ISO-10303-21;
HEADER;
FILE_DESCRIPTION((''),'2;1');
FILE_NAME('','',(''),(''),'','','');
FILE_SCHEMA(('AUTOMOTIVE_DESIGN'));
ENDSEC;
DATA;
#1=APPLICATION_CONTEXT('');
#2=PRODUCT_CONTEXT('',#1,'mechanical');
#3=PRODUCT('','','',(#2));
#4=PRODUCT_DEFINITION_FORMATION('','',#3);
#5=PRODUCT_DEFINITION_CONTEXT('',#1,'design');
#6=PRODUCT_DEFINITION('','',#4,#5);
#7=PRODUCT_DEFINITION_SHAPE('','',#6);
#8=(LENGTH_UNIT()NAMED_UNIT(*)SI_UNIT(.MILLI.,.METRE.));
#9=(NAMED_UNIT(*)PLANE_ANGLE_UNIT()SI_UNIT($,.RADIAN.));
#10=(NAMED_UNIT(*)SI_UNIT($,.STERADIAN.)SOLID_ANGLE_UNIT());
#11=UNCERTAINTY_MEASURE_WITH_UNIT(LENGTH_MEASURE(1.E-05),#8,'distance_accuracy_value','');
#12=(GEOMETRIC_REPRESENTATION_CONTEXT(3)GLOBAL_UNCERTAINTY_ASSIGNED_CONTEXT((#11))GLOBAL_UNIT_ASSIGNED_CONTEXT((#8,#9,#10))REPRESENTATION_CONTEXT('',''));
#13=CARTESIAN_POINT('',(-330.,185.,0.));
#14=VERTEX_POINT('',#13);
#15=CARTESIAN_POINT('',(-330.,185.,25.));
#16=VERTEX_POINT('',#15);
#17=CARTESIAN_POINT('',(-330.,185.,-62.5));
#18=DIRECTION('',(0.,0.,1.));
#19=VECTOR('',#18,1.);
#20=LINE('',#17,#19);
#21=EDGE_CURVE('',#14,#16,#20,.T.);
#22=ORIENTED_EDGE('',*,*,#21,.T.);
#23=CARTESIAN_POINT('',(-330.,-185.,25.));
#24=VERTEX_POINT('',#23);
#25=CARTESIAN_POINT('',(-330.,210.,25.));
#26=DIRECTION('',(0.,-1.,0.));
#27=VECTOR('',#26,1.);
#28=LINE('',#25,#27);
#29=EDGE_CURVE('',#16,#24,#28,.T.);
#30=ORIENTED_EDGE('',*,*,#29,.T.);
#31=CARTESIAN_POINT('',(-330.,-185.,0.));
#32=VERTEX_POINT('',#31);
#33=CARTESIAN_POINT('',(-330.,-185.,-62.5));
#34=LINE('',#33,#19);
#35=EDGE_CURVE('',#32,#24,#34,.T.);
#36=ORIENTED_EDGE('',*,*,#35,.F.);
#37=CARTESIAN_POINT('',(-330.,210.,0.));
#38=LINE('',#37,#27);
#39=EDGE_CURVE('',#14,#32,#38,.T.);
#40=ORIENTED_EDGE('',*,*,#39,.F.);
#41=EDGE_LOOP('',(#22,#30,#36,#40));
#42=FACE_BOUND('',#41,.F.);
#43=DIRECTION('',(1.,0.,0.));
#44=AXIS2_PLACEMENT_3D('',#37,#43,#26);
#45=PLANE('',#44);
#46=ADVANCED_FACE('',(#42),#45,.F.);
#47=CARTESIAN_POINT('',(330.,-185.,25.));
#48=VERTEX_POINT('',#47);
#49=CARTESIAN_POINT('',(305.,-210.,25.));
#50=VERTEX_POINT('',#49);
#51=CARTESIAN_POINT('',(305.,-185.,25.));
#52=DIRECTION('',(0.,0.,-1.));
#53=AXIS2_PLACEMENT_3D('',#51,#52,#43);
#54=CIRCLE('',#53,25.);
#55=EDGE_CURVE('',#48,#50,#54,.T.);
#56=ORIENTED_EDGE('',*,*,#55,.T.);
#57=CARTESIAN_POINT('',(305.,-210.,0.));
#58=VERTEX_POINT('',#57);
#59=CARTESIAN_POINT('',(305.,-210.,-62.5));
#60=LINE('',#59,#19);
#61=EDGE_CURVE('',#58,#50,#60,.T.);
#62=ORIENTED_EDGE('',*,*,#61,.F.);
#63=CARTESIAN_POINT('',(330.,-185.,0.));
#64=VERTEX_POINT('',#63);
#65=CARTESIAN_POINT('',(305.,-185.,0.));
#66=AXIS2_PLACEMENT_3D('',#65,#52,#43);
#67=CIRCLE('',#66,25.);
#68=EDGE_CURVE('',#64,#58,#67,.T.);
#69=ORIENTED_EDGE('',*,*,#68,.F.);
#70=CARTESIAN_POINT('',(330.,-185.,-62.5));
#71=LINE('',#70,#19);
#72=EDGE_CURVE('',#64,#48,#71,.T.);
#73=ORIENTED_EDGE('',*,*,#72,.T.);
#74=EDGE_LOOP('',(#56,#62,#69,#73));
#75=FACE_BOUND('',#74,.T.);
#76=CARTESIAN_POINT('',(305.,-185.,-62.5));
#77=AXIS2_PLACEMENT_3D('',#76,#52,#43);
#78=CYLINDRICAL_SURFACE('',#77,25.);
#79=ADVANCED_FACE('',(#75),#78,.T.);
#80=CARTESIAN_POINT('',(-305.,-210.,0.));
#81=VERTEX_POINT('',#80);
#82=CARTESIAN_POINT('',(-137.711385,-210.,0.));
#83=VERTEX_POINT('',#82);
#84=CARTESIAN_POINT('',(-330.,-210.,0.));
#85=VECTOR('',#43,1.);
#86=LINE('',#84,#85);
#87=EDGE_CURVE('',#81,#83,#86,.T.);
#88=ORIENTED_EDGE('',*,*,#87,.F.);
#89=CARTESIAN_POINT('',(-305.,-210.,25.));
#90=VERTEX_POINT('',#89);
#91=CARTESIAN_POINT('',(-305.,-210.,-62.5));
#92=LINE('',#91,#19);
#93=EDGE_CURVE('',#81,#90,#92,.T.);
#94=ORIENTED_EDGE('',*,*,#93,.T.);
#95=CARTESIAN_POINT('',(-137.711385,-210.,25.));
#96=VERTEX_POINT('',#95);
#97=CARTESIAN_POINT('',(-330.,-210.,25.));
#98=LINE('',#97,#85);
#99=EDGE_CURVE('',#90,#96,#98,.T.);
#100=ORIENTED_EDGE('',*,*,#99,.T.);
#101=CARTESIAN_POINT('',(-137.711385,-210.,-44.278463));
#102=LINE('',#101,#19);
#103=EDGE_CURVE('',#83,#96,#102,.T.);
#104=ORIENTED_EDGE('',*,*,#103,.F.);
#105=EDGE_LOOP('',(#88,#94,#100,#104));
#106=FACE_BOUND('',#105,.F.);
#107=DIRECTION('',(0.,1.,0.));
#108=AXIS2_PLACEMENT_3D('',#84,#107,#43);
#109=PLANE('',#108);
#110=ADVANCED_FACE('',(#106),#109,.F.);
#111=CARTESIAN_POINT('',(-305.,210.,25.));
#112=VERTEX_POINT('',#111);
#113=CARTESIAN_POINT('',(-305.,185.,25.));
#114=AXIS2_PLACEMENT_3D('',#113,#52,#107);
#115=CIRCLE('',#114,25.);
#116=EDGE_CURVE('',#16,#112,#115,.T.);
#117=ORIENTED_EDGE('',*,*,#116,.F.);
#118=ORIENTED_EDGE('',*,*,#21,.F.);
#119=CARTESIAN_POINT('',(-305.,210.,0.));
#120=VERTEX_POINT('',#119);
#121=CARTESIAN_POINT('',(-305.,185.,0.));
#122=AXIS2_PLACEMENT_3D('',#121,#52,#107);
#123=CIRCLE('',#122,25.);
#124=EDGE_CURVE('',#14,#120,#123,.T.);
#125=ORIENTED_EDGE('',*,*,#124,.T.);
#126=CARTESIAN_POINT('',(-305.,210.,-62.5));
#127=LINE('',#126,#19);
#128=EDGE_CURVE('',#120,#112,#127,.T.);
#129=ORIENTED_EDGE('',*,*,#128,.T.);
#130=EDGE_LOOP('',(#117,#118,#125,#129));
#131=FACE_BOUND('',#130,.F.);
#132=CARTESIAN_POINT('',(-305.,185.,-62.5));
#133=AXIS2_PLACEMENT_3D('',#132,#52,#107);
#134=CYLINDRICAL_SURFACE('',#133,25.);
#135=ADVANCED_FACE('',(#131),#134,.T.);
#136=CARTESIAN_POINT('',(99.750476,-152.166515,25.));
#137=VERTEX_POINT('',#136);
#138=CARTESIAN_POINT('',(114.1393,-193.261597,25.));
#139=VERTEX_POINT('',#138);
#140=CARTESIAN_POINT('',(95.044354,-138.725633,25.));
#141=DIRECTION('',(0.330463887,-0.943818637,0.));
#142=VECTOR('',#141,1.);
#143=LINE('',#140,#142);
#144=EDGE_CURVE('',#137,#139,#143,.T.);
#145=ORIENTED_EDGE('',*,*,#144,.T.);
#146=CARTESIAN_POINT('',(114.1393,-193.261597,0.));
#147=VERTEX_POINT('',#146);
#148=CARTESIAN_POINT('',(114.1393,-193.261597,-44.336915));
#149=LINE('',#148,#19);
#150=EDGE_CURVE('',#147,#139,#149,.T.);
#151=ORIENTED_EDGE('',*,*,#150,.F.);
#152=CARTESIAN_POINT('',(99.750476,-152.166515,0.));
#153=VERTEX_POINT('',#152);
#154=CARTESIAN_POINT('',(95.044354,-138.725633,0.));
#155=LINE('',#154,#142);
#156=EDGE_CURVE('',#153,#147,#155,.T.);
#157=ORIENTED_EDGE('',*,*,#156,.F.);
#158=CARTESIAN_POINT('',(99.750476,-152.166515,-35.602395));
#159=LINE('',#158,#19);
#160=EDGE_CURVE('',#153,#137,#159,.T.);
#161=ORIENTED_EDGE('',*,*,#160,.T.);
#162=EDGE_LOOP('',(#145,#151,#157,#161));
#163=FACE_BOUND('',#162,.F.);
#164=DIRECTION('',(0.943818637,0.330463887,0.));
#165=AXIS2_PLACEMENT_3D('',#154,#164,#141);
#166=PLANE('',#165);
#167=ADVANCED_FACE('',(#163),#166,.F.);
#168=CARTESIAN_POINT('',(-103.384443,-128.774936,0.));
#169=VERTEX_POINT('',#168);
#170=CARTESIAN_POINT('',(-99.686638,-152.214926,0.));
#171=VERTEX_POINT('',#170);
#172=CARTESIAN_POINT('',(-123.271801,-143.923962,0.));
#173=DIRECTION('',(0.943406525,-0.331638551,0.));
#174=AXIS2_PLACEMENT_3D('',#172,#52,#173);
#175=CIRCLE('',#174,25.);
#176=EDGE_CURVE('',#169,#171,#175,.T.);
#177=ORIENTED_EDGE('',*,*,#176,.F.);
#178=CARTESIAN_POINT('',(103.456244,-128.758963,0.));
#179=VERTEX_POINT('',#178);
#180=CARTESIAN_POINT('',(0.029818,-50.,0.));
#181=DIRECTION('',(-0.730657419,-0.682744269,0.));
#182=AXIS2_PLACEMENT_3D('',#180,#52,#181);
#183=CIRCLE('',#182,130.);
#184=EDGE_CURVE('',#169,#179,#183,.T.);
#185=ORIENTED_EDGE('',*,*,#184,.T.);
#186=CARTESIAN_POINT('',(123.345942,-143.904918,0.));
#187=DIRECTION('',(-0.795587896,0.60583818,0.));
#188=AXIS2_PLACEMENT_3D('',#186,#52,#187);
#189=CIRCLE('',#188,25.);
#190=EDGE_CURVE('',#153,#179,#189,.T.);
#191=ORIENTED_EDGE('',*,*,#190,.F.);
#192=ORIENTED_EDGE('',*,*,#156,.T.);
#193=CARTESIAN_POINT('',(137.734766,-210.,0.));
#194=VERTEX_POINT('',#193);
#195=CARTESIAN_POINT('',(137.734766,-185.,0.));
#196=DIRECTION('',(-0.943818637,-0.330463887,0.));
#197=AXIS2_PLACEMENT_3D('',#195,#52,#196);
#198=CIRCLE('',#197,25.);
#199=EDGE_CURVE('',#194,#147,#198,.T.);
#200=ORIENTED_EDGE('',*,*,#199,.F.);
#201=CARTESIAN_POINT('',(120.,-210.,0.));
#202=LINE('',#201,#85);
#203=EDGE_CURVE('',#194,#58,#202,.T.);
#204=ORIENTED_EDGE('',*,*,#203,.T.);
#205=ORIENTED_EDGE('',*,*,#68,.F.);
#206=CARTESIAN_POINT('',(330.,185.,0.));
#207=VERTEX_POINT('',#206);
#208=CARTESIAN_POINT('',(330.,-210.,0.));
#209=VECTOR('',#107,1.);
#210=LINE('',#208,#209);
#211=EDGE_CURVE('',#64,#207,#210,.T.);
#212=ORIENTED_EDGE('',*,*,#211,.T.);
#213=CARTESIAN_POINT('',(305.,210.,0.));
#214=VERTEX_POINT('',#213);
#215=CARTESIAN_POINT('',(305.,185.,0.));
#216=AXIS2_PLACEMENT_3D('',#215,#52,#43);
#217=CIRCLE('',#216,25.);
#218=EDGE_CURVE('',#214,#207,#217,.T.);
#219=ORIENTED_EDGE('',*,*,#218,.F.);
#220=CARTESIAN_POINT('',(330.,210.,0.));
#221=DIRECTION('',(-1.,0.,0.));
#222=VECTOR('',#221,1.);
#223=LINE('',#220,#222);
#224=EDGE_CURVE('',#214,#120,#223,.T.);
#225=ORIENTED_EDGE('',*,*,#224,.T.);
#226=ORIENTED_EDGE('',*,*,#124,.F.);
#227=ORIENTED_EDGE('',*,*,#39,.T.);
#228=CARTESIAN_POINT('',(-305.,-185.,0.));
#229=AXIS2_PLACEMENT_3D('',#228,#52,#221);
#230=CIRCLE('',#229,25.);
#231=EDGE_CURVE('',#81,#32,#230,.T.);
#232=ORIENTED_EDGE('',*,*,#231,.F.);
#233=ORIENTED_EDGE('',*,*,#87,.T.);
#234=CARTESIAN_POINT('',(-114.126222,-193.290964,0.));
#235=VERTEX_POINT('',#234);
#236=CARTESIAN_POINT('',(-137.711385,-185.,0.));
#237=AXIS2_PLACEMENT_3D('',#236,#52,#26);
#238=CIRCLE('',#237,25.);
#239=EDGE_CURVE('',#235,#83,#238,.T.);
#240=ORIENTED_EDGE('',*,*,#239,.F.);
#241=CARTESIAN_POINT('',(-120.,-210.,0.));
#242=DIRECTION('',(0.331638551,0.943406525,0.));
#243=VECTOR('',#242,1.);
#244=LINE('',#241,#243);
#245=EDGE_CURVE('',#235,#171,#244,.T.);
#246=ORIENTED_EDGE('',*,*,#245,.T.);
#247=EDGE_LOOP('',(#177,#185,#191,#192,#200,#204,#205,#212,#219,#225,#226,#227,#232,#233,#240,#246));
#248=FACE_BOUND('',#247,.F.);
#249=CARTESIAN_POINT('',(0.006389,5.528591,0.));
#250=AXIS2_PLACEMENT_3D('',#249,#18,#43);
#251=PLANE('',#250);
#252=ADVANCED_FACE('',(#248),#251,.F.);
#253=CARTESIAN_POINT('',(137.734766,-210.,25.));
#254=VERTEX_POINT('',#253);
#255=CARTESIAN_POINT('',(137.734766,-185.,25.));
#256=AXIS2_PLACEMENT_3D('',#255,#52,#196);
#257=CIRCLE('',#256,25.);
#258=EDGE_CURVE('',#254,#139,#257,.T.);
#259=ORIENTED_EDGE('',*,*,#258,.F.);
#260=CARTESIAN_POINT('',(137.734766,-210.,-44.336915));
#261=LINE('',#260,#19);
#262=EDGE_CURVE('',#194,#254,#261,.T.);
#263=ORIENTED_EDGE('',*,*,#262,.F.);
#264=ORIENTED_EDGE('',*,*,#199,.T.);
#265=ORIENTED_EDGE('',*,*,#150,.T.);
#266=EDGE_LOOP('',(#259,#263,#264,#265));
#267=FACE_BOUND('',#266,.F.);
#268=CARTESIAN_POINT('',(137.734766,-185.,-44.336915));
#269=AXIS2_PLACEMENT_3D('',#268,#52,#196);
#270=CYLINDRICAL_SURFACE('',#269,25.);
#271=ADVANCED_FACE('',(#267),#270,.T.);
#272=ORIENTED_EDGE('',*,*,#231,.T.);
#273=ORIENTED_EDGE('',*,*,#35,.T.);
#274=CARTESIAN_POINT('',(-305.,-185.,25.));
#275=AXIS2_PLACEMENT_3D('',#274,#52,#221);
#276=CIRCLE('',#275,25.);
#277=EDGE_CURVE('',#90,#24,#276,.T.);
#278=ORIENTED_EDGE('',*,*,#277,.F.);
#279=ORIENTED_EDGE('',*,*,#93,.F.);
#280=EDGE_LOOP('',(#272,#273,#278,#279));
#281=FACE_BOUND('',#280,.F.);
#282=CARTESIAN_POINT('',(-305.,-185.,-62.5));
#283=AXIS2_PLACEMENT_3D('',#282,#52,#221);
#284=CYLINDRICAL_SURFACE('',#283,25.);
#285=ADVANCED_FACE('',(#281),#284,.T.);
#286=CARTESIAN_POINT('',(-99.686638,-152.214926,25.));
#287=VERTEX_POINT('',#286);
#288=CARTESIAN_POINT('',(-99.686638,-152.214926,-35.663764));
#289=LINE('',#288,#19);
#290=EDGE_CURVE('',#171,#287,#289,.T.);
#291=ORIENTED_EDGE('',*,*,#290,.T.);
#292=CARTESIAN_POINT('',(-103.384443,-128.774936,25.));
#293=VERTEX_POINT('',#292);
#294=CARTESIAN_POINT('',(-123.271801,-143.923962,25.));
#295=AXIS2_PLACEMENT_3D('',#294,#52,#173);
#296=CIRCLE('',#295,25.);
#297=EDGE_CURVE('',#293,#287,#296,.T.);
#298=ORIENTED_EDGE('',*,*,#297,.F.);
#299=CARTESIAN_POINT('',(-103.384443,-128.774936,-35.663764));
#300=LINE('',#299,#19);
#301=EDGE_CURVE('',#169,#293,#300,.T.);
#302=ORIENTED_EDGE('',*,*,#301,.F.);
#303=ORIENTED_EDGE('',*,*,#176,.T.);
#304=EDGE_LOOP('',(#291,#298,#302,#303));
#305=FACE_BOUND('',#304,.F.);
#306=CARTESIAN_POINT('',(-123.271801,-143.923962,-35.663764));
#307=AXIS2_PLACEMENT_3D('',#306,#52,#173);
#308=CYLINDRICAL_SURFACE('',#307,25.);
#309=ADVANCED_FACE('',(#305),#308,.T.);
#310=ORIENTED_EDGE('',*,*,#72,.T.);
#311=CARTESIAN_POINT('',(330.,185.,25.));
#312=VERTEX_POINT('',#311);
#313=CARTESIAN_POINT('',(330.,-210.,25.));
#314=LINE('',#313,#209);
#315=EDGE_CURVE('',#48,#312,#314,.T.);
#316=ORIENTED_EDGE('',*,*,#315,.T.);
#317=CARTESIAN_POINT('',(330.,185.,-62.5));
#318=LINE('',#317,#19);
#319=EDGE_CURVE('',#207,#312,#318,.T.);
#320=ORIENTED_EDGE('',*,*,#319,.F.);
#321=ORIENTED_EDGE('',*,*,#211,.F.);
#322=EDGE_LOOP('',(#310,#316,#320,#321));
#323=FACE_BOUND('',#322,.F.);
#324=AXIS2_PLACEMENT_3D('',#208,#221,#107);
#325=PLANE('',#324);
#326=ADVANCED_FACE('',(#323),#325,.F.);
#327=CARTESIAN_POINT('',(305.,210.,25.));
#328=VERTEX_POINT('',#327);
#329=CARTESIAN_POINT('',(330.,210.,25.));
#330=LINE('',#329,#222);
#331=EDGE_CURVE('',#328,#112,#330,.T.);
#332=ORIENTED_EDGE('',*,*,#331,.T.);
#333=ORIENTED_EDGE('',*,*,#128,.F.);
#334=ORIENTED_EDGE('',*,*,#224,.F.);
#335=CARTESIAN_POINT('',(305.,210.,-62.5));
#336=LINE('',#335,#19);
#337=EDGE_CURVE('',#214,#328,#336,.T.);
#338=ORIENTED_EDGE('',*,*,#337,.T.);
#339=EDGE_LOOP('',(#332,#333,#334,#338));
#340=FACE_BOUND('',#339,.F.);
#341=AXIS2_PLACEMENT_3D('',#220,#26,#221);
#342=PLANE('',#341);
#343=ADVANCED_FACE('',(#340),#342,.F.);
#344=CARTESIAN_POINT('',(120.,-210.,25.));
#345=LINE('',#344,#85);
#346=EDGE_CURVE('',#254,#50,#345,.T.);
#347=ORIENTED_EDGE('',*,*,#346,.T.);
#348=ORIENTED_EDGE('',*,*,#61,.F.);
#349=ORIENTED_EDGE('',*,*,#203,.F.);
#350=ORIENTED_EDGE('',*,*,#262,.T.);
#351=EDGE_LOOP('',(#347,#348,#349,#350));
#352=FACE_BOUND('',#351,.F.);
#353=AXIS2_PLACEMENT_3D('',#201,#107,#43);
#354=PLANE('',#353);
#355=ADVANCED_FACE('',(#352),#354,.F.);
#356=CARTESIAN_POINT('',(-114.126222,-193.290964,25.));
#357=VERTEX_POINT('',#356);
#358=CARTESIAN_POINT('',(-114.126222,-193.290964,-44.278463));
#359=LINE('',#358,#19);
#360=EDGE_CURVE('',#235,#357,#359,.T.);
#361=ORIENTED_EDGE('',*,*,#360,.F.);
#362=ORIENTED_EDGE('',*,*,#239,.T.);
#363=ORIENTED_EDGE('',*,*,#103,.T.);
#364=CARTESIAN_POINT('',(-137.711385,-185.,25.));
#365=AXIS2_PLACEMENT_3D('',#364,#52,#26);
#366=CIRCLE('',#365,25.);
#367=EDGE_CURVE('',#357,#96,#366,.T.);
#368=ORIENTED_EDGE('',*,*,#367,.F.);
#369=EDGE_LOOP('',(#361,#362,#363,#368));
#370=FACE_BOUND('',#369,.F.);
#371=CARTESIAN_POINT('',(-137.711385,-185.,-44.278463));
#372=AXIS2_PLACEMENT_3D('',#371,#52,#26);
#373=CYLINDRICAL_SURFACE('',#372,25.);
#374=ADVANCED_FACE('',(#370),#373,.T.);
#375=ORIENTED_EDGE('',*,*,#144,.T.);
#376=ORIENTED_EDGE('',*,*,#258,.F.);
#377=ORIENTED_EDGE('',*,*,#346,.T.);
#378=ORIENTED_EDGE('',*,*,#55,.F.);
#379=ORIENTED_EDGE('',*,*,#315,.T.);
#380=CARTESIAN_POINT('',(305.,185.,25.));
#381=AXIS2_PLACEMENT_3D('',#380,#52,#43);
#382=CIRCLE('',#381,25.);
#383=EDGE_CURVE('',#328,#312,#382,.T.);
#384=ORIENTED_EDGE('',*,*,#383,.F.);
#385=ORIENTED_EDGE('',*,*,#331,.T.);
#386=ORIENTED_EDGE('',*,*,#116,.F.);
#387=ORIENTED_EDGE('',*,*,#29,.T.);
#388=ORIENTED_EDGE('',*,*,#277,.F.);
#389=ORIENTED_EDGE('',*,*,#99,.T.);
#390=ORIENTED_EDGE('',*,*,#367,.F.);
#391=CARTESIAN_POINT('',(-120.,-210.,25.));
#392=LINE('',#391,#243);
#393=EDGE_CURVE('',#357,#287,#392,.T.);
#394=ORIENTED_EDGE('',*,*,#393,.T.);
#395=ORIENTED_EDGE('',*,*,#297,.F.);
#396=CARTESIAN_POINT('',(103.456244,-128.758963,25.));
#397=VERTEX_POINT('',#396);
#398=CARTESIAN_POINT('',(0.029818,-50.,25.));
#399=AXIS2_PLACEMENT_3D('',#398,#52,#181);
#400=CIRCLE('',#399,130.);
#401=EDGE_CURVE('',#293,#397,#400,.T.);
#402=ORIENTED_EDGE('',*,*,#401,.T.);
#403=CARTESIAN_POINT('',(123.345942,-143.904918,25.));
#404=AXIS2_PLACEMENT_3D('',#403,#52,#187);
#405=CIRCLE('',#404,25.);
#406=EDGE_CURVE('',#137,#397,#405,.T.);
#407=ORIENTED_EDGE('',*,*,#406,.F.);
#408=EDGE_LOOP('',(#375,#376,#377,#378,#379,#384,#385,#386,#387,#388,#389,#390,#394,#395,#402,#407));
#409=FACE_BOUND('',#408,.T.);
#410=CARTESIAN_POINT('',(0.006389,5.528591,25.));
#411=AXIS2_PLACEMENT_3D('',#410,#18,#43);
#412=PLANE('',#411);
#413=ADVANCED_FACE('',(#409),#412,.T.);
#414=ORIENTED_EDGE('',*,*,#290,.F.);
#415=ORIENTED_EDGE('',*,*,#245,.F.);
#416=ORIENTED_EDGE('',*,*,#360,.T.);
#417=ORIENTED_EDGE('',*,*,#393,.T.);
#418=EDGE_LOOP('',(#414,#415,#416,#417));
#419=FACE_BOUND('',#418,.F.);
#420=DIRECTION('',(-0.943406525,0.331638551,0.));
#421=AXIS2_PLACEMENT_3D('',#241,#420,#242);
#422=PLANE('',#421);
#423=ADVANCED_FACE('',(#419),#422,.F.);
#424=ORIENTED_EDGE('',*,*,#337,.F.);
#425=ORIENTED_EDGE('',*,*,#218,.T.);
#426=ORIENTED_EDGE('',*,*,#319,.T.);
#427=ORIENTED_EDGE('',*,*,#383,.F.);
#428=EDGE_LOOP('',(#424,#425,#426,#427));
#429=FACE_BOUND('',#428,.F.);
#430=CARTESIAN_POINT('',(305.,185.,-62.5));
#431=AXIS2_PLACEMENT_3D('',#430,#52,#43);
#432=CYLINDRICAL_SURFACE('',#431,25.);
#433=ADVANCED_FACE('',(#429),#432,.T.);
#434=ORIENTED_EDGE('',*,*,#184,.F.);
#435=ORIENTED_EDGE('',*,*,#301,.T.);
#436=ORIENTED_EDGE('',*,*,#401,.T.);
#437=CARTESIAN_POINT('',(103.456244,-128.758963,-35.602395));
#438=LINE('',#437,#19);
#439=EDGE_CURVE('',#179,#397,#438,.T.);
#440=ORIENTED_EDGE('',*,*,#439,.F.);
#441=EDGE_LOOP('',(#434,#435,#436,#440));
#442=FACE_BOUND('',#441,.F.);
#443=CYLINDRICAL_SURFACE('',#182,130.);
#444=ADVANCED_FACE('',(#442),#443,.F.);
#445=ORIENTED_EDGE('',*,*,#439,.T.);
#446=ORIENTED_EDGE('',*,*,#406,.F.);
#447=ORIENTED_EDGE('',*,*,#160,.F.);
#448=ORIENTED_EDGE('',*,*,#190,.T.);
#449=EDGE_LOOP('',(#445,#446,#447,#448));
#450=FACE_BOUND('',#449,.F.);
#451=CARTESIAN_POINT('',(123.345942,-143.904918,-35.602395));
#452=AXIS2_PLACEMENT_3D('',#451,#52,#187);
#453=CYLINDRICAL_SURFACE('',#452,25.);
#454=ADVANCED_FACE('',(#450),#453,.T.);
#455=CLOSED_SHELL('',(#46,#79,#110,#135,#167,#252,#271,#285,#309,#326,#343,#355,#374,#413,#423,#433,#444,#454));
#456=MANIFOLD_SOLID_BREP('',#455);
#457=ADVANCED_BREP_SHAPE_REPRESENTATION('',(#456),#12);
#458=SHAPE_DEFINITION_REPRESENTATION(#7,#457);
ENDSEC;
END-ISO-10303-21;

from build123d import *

# Parameters (mm, degrees)
F1_DEPTH    = 25
F2_T1_DEPTH = 150
F2_T3_DEPTH = 113.556925296
F2_T5_DEPTH = 96.327528549
F2_T7_DEPTH = 96.2047902339
F2_T9_DEPTH = 113.6738307778


# Not quite as in the source:
# - a fillet or chamfer that OpenCascade refuses, or shapes differently, is made with other operations: its cross-section is extruded or revolved along the edge and cut away or added


with BuildPart() as f1:
    # F0 (on Top) → F1 (new body)
    with BuildSketch(Plane.XY):
        with BuildLine():
            Line((330, -210), (330, 210))
            Line((330, 210), (-330, 210))
            Line((-330, 210), (-330, -210))
            Line((-330, -210), (-120, -210))
            Line((-120, -210), (-94.9556464673, -138.7567549117))
            ThreePointArc((-94.9556464673, -138.7567549117), (-47.6770453611, 70.9299598508), (130.0298179868, -50))
            ThreePointArc((130.0298179868, -50), (120.9675904588, -97.6870547372), (95.0443535327, -138.7256334719))
            Line((95.0443535327, -138.7256334719), (120, -210))
            Line((120, -210), (330, -210))
        make_face()
    extrude(amount=F1_DEPTH)

    # F2: fillet of radius 25 on 9 edges, made by hand

    # F2_s2 → F2_t1 (cut)
    with BuildSketch(Plane.XY.offset(-62.5)):
        with BuildLine():
            ThreePointArc((330, -185), (322.6776695297, -202.6776695297), (305, -210))
            Line((305, -210), (330, -210))
            Line((330, -210), (330, -185))
        make_face()
        with BuildLine():
            ThreePointArc((-330, -185), (-322.6776695297, -202.6776695297), (-305, -210))
            Line((-305, -210), (-330, -210))
            Line((-330, -210), (-330, -185))
        make_face()
        with BuildLine():
            ThreePointArc((330, 185), (322.6776695297, 202.6776695297), (305, 210))
            Line((305, 210), (330, 210))
            Line((330, 210), (330, 185))
        make_face()
        with BuildLine():
            ThreePointArc((-305, 210), (-322.6776695297, 202.6776695297), (-330, 185))
            Line((-330, 185), (-330, 210))
            Line((-330, 210), (-305, 210))
        make_face()
    extrude(amount=F2_T1_DEPTH, mode=Mode.SUBTRACT)

    # F2_s4 → F2_t3 (cut)
    with BuildSketch(Plane.XY.offset(-44.278462648)):
        with BuildLine():
            ThreePointArc((-137.7113850592, -210), (-123.2592934135, -205.3994374203), (-114.1262219297, -193.2909637652))
            Line((-114.1262219297, -193.2909637652), (-120, -210))
            Line((-120, -210), (-137.7113850592, -210))
        make_face()
    extrude(amount=F2_T3_DEPTH, mode=Mode.SUBTRACT)

    # F2_s6 → F2_t5 (cut)
    with BuildSketch(Plane.XY.offset(-35.6637642745)):
        with BuildLine():
            ThreePointArc((-99.6866381045, -152.2149260833), (-98.5772005252, -140.0282344234), (-103.3844432952, -128.7749361378))
            ThreePointArc((-103.3844432952, -128.7749361378), (-99.2955159897, -133.8717952023), (-94.9556464673, -138.7567549117))
            Line((-94.9556464673, -138.7567549117), (-99.6866381045, -152.2149260833))
        make_face()
    extrude(amount=F2_T5_DEPTH, mode=Mode.SUBTRACT)

    # F2_s8 → F2_t7 (cut)
    with BuildSketch(Plane.XY.offset(-35.6023951169)):
        with BuildLine():
            ThreePointArc((103.4562444176, -128.7589633994), (98.6534687448, -139.9957269325), (99.7504758881, -152.1665150823))
            Line((99.7504758881, -152.1665150823), (95.0443535327, -138.7256334719))
            ThreePointArc((95.0443535327, -138.7256334719), (99.3753638137, -133.8478534272), (103.4562444176, -128.7589633994))
        make_face()
    extrude(amount=F2_T7_DEPTH, mode=Mode.SUBTRACT)

    # F2_s10 → F2_t9 (cut)
    with BuildSketch(Plane.XY.offset(-44.3369153889)):
        with BuildLine():
            ThreePointArc((114.1393002355, -193.261597183), (123.2699801146, -205.3904380725), (137.7347661556, -210))
            Line((137.7347661556, -210), (120, -210))
            Line((120, -210), (114.1393002355, -193.261597183))
        make_face()
    extrude(amount=F2_T9_DEPTH, mode=Mode.SUBTRACT)


solid = f1.part
